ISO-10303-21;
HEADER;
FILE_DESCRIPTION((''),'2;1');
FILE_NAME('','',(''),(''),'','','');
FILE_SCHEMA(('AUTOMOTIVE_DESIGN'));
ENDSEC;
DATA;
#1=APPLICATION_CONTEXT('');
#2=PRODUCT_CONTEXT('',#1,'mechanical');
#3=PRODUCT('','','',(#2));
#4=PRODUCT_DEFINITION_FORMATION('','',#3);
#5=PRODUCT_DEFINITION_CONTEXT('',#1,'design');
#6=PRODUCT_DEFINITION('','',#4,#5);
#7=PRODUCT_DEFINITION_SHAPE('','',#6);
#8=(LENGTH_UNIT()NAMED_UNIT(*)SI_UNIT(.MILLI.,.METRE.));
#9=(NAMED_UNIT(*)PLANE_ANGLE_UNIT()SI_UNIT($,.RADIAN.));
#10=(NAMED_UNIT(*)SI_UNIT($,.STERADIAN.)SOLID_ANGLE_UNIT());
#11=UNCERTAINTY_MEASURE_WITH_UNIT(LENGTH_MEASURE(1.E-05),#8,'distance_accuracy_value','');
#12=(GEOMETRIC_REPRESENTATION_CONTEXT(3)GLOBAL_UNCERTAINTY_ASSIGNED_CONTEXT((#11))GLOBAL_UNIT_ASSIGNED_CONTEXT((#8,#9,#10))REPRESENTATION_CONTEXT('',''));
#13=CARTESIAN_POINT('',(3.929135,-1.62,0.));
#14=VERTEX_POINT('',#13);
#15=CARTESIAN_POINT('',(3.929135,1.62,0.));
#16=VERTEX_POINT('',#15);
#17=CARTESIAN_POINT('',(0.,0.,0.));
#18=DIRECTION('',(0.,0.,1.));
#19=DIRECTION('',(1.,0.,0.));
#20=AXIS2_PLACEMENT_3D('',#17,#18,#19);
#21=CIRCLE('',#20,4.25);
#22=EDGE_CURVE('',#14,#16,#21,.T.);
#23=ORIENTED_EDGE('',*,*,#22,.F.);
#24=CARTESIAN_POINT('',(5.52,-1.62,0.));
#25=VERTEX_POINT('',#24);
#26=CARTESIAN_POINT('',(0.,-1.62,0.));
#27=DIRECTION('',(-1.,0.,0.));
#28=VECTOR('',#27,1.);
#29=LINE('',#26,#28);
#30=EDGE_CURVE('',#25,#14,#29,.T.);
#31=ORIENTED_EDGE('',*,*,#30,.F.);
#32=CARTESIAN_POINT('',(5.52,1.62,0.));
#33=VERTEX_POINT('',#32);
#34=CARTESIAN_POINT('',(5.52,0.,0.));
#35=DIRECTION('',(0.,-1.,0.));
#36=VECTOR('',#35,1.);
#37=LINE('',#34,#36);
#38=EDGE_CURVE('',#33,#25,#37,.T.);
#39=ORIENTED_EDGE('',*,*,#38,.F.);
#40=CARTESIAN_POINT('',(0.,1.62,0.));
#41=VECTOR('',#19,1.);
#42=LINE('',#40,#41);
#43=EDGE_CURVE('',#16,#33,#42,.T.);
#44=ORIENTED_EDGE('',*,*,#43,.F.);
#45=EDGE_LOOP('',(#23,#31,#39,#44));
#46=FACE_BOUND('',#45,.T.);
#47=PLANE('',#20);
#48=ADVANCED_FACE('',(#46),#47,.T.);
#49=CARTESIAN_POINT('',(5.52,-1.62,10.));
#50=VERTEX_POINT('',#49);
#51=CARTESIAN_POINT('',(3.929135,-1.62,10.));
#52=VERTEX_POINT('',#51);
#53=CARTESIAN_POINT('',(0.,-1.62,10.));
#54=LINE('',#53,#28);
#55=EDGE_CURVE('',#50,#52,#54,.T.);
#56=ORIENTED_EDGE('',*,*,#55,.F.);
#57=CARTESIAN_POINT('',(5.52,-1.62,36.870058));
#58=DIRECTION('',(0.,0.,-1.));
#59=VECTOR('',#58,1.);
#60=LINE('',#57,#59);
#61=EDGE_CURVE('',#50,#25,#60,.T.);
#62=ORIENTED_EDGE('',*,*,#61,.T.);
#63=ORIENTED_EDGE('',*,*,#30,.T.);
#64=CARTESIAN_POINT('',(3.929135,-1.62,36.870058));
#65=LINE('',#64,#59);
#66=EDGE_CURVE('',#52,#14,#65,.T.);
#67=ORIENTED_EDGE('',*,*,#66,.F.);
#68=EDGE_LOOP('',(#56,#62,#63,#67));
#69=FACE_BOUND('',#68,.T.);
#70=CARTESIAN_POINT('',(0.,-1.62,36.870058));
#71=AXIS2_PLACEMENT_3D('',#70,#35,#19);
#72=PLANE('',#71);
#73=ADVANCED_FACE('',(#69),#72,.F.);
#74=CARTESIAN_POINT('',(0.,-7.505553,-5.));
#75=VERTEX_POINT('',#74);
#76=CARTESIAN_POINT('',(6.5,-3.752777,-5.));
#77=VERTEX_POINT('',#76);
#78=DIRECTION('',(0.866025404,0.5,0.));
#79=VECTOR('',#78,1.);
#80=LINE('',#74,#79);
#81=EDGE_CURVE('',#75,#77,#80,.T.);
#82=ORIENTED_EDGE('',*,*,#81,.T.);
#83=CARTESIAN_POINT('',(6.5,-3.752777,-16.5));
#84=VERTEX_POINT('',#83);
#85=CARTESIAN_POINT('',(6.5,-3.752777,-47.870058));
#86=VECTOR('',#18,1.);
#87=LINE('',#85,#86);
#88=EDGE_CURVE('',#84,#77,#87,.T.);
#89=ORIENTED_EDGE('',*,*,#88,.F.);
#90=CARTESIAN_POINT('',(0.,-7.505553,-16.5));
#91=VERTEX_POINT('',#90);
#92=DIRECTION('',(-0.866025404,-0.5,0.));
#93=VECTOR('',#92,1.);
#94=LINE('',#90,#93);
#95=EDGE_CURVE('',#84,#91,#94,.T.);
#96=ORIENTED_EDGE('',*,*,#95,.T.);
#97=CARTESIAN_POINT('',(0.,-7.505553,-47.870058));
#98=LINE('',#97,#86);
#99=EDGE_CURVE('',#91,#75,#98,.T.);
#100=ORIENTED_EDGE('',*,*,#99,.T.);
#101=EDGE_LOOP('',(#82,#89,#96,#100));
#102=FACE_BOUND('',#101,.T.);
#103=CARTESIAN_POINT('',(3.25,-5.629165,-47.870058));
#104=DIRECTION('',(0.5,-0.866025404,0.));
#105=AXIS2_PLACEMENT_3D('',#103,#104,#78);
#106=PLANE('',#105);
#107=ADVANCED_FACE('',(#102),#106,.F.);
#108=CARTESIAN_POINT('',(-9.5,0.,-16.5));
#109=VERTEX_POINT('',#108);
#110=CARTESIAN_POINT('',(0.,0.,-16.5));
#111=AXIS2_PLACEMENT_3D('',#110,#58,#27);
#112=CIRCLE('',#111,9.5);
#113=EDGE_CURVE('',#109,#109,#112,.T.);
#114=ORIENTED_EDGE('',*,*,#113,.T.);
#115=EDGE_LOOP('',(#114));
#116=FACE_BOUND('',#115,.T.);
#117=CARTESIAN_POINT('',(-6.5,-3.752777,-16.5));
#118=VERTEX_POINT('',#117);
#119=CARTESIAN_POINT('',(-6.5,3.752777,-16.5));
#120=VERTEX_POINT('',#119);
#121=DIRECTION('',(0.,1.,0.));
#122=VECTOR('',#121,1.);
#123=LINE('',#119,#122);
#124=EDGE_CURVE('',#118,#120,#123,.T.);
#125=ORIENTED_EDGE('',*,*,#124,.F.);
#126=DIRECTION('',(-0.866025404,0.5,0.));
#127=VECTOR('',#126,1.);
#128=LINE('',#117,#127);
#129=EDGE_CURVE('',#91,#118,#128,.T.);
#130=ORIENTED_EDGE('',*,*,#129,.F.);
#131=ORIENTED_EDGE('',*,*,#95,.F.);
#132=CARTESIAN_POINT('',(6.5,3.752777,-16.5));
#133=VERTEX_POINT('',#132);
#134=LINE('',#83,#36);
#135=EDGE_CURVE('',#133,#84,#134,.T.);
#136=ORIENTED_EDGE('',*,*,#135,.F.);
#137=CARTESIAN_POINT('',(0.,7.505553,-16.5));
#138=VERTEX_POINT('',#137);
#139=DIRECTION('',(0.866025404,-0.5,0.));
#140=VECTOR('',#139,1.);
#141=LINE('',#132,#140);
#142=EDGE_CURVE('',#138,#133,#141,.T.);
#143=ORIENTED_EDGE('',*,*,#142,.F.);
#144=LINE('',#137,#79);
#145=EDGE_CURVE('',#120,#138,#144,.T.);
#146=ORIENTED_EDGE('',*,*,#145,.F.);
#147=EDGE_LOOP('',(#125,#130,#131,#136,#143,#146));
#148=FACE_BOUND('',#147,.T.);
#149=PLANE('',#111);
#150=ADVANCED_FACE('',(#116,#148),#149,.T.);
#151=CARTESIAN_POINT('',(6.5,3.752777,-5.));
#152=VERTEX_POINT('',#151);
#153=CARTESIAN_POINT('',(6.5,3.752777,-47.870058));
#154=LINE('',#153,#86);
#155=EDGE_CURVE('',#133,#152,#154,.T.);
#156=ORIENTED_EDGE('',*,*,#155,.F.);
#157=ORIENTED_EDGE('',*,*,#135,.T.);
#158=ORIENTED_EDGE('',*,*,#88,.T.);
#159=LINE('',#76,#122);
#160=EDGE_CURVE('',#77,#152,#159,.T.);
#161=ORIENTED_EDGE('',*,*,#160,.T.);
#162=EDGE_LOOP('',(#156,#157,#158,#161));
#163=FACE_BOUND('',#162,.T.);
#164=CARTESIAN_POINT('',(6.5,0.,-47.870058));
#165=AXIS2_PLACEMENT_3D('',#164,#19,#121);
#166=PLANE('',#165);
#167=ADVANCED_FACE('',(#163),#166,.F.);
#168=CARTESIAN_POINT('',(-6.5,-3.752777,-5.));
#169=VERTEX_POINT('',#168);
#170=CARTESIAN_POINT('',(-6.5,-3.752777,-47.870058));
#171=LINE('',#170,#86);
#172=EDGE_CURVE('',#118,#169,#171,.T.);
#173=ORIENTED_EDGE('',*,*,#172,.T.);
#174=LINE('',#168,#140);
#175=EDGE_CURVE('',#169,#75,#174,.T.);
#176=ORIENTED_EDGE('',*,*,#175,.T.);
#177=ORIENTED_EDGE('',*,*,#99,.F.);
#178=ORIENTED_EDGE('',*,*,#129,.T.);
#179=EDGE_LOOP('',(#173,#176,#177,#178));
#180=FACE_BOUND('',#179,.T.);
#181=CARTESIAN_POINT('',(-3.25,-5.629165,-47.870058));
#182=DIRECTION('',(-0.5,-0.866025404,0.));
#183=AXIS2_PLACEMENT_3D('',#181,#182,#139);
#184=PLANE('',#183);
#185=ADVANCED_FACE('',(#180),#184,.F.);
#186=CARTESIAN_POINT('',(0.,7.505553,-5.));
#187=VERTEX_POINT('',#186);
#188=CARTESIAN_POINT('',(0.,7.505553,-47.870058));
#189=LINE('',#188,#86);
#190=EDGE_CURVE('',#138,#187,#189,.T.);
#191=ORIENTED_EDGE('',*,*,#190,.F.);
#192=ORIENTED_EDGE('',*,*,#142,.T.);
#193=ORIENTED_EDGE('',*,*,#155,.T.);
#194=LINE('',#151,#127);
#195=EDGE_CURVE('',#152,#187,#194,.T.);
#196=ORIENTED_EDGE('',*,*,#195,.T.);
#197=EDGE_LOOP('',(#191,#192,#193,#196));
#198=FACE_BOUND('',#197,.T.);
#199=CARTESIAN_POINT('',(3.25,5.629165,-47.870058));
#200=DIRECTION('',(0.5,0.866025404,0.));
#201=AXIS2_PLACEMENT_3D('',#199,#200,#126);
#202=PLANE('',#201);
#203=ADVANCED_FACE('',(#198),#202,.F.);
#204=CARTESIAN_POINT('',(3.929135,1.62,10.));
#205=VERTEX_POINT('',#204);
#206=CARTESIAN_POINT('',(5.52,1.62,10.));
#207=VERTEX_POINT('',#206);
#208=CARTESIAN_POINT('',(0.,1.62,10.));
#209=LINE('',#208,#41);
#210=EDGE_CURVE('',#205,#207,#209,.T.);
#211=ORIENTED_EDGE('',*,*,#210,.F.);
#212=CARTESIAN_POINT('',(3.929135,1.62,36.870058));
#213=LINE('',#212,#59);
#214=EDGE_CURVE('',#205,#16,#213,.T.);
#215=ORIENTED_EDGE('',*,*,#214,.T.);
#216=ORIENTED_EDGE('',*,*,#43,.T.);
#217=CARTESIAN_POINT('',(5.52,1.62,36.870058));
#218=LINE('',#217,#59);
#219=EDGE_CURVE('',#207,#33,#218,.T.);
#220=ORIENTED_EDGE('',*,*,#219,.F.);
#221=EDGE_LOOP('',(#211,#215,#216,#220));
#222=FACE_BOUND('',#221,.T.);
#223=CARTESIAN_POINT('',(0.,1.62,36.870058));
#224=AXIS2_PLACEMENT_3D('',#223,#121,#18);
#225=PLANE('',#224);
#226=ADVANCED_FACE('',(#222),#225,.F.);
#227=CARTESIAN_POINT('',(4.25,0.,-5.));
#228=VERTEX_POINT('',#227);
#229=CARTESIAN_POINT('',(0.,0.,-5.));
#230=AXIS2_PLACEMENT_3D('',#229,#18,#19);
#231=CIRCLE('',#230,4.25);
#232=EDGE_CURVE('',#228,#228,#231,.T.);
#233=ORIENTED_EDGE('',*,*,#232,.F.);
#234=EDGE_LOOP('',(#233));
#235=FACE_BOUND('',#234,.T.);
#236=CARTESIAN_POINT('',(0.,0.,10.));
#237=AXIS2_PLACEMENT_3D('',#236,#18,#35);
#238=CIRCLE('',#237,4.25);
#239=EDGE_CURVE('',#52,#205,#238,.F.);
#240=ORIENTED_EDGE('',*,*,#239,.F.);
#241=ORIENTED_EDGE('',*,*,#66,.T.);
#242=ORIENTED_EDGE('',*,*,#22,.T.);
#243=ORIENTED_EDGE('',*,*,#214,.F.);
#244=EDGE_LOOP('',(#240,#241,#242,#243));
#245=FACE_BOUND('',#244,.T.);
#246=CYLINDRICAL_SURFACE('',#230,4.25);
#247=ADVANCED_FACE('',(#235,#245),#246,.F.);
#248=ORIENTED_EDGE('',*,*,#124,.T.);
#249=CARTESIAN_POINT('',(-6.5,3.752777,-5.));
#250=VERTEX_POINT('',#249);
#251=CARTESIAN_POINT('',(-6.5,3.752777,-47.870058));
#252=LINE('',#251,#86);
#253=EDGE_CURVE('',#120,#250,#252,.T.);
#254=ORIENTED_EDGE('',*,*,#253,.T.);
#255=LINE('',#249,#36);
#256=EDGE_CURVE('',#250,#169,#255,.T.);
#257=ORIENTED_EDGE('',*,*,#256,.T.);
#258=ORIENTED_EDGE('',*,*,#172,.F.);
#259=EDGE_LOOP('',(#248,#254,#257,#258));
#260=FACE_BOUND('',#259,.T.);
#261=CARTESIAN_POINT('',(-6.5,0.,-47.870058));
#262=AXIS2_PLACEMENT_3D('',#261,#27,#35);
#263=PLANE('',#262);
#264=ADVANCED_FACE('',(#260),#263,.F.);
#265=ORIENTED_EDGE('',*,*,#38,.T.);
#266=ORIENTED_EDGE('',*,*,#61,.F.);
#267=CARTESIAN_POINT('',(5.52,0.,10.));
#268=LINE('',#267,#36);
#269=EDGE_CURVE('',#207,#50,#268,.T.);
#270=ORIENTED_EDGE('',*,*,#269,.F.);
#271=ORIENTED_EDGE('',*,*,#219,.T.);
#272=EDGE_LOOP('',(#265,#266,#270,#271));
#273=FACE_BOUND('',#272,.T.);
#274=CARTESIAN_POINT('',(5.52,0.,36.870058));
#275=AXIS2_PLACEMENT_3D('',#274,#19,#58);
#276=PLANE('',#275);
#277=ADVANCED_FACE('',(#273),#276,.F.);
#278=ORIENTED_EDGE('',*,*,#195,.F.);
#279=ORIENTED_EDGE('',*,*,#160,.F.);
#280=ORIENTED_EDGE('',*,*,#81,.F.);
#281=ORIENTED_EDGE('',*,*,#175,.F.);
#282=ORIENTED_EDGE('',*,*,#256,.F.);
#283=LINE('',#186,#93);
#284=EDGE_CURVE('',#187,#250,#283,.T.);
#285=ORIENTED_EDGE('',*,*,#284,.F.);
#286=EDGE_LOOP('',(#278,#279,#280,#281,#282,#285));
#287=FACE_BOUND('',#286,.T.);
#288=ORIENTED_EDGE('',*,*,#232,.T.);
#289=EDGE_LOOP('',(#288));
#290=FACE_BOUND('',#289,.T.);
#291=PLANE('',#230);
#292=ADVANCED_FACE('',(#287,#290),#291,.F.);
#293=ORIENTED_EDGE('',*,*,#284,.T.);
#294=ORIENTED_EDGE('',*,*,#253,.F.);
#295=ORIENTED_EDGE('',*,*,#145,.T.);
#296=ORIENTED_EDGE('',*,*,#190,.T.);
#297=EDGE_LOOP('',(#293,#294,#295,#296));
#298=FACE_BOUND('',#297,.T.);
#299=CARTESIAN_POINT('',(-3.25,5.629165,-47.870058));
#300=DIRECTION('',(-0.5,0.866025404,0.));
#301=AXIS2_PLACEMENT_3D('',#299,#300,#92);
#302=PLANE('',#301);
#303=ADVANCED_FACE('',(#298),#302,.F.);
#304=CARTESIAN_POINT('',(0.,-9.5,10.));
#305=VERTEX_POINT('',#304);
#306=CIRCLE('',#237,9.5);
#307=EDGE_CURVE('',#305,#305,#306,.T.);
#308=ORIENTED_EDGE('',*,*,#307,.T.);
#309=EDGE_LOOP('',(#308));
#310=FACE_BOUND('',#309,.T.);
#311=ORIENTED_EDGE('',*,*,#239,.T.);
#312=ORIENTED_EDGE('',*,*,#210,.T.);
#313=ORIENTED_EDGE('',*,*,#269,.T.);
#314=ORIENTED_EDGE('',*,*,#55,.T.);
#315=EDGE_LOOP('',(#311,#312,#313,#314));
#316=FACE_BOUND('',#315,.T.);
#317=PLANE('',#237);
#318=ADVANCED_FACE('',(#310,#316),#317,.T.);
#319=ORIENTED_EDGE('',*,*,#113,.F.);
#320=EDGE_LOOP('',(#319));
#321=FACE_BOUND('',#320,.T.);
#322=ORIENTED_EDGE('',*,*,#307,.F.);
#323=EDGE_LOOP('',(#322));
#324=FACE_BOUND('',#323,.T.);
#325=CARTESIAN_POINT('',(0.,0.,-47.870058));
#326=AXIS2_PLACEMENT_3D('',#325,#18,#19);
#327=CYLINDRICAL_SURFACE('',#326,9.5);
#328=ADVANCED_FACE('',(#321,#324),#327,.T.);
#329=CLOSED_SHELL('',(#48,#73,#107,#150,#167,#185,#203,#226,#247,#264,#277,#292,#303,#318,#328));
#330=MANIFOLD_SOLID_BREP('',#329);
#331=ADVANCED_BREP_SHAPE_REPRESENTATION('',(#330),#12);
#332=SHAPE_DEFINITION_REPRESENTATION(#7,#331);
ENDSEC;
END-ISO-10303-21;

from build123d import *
from build123d.topology import SkipClean

# Parameters (mm, degrees)
SKETCH2_R              = 9.5
BOSS_EXTRUDE1_DEPTH    = 21
SKETCH3_R              = 4.25
BOSS_EXTRUDE2_DEPTH    = 5
BOSS_EXTRUDE3_START    = 10
SKETCH4_R              = 9.5
BOSS_EXTRUDE3_DEPTH    = 10
CUT_EXTRUDE1_START     = -7.5
CUT_EXTRUDE1_OUTLINE_R = 9.5
CUT_EXTRUDE1_DEPTH     = 7.5
SKETCH6_R              = 9.5
BOSS_EXTRUDE4_DEPTH    = 3


# Read off the part's stored shape, not the designer's step: Cut-Extrude1
with BuildPart() as part:
    # Sketch2 → Boss-Extrude1 (new body)
    with BuildSketch(Plane.XY):
        Circle(SKETCH2_R)
        Polygon((-6.5, -3.75277675), (0, -7.505553499), (6.5, -3.75277675), (6.5, 3.75277675), (0, 7.505553499), (-6.5, 3.75277675), align=None, mode=Mode.SUBTRACT)
    extrude(amount=-BOSS_EXTRUDE1_DEPTH)

    # Sketch3 → Boss-Extrude2 (add)
    with BuildSketch(Plane.XY):
        Polygon((-6.5, -3.75277675), (0, -7.505553499), (6.5, -3.75277675), (6.5, 3.75277675), (0, 7.505553499), (-6.5, 3.75277675), align=None)
        Circle(SKETCH3_R, mode=Mode.SUBTRACT)
    extrude(amount=-BOSS_EXTRUDE2_DEPTH)

    # Sketch4 → Boss-Extrude3 (add)
    with BuildSketch(Plane.XY.offset(BOSS_EXTRUDE3_START)):
        with Locations(Location((0, 0, 0), (0, 0, 270))):
            Circle(SKETCH4_R)
        with BuildLine():
            ThreePointArc((3.929134765, -1.62), (-4.25, 0), (3.929134765, 1.62))
            Line((3.929134765, 1.62), (5.52, 1.62))
            Line((5.52, 1.62), (5.52, -1.62))
            Line((5.52, -1.62), (3.929134765, -1.62))
        make_face(mode=Mode.SUBTRACT)
    extrude(amount=-BOSS_EXTRUDE3_DEPTH)

    # Cut-Extrude1 outline → Cut-Extrude1 (cut)
    with BuildSketch(Plane(origin=(0, 0, -21), x_dir=(-1, 0, 0), z_dir=(0, 0, -1)).offset(CUT_EXTRUDE1_START)):
        Circle(CUT_EXTRUDE1_OUTLINE_R)
        Polygon((6.5, 3.75277675), (6.5, -3.75277675), (0, -7.505553499), (-6.5, -3.75277675), (-6.5, 3.75277675), (0, 7.505553499), align=None, mode=Mode.SUBTRACT)
    extrude(amount=CUT_EXTRUDE1_DEPTH, mode=Mode.SUBTRACT)

    # Sketch6 → Boss-Extrude4 (add)
    with SkipClean():  # the faces are left unmerged after this step: merging them gives an invalid solid
        with BuildSketch(Plane(origin=(0, 0, -13.5), x_dir=(-1, 0, 0), z_dir=(0, 0, -1))):
            with Locations(Location((0, 0, 0), (0, 0, 270))):
                Circle(SKETCH6_R)
            Polygon((6.5, 3.75277675), (6.5, -3.75277675), (0, -7.505553499), (-6.5, -3.75277675), (-6.5, 3.75277675), (0, 7.505553499), align=None, mode=Mode.SUBTRACT)
        extrude(amount=BOSS_EXTRUDE4_DEPTH)
    add(part.part.scale(1), mode=Mode.REPLACE)  # the faces are merged on a copy


solid = part.part
